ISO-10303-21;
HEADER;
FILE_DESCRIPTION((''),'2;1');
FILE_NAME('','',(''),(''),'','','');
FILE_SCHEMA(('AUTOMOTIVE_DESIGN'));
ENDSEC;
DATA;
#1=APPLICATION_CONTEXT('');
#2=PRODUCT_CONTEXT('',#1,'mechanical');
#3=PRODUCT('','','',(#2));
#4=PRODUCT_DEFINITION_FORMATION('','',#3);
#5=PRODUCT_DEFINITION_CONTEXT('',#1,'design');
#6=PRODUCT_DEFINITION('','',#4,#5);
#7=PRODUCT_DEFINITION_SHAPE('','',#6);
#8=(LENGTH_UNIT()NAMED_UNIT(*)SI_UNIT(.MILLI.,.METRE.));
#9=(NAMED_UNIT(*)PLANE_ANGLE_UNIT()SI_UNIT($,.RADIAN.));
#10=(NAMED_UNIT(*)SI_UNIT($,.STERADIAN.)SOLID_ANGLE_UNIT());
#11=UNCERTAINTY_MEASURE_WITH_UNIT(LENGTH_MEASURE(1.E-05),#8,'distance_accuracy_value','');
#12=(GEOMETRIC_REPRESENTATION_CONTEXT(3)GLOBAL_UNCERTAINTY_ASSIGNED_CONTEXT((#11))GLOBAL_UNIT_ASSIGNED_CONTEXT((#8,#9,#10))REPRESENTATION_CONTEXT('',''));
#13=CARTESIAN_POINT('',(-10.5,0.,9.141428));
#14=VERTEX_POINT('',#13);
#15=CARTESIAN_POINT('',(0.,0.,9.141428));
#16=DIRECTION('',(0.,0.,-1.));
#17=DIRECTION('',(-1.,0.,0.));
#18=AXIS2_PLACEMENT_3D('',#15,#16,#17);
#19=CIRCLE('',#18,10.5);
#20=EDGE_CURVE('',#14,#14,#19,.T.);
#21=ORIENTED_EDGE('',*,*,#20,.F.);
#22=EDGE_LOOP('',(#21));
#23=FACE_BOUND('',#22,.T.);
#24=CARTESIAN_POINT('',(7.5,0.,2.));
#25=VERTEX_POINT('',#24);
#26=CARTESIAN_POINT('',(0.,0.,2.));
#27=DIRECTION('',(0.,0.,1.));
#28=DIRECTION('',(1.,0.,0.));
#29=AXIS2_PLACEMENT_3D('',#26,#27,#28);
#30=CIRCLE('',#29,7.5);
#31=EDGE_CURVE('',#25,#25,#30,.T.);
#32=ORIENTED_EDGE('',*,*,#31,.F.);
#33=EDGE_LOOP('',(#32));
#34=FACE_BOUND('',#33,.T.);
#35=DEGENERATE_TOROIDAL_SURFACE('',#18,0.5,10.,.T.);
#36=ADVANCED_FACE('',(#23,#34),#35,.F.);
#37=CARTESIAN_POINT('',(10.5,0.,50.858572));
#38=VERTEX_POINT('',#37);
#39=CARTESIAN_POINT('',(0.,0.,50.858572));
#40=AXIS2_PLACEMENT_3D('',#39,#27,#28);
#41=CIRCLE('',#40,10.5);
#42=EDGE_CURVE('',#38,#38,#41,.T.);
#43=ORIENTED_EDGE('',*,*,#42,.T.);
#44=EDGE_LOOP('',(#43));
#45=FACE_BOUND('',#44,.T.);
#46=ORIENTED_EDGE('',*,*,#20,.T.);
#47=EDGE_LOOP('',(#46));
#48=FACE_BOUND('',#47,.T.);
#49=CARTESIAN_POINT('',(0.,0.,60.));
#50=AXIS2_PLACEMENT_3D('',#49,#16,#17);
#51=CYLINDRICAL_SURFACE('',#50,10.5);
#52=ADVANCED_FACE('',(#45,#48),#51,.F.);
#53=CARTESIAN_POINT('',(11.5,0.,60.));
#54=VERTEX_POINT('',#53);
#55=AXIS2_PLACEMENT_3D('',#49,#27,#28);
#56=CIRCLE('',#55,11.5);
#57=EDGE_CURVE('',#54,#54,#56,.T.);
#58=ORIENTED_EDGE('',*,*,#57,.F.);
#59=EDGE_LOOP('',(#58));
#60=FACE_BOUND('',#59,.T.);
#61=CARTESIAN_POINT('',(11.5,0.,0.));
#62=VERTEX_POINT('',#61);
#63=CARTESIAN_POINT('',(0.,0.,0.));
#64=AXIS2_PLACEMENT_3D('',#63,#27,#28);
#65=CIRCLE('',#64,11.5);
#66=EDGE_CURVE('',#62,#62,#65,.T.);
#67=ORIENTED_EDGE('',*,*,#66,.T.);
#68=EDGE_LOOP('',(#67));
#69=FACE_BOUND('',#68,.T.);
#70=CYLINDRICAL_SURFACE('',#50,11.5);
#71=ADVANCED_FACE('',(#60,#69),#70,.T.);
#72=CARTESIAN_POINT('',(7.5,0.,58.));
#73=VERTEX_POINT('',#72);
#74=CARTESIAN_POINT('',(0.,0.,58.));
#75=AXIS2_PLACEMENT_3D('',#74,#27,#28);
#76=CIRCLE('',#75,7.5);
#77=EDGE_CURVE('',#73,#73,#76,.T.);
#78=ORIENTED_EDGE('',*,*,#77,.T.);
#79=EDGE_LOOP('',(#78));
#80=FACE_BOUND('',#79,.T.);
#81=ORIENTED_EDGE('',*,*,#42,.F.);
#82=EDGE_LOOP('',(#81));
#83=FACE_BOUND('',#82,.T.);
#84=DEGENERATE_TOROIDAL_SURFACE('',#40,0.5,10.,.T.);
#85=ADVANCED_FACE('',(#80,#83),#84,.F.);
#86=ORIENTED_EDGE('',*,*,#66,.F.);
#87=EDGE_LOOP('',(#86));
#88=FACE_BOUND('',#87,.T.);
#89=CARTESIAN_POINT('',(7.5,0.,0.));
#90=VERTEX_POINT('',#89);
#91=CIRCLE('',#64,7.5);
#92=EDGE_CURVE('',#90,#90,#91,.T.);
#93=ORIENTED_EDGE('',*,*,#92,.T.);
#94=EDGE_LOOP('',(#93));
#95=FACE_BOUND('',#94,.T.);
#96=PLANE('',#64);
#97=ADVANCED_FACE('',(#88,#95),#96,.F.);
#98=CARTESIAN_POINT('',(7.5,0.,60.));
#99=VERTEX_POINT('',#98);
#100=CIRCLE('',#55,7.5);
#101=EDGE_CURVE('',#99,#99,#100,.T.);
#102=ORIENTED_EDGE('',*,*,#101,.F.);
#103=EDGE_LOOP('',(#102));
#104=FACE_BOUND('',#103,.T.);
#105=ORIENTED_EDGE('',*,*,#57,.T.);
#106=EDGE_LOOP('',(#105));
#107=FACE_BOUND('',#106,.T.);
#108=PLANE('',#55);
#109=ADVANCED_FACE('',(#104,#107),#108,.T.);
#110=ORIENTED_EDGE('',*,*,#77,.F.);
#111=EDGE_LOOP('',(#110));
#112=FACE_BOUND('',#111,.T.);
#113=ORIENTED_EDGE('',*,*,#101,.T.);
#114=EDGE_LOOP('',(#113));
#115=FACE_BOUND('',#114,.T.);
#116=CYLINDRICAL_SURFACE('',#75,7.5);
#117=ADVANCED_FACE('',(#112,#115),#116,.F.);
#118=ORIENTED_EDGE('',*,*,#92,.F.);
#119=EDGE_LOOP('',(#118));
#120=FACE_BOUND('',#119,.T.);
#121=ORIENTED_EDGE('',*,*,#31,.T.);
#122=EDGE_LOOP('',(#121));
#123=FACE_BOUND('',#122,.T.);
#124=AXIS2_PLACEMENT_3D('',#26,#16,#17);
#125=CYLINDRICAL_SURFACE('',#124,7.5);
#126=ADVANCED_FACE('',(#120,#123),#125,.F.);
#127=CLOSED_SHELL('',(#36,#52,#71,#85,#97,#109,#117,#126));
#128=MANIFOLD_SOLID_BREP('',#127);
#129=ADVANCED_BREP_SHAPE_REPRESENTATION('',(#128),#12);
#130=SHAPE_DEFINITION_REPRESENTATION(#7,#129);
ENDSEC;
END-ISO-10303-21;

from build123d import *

# Parameters (mm, degrees)
SKETCH1_R           = 11.5
SKETCH1_R_2         = 10.5
BOSS_EXTRUDE1_DEPTH = 60
SKETCH1_3_R         = 10.5
SKETCH1_3_R_2       = 7.5
BOSS_EXTRUDE2_DEPTH = 2
FILLET2_R           = 10


with BuildPart() as part:
    # Sketch1 → Boss-Extrude1 (new body)
    with BuildSketch(Plane.XY):
        Circle(SKETCH1_R)
        Circle(SKETCH1_R_2, mode=Mode.SUBTRACT)
    extrude(amount=BOSS_EXTRUDE1_DEPTH)

    # Sketch1<3> → Boss-Extrude2 (add)
    with BuildSketch(Plane.XY):
        Circle(SKETCH1_3_R)
        Circle(SKETCH1_3_R_2, mode=Mode.SUBTRACT)
    boss_extrude2 = extrude(amount=BOSS_EXTRUDE2_DEPTH)

    # Mirror1: Boss-Extrude2 across plane
    add(boss_extrude2.mirror(Plane.XY.offset(30)))

    # Fillet2
    # the kernel refuses this fillet: 10 mm, written as the material it adds along each edge
    with BuildSketch(Plane(origin=(0, 0, 58), x_dir=(1, 0, 0), z_dir=(0, -1, 0))) as fillet2_piece_1:
        with BuildLine():
            CenterArc((0.5, -7.141428429), FILLET2_R, 0, 45.572995999)
            Line((7.5, 0), (7.64, 0.142828569))
            ThreePointArc((7.64, 0.142828569), (9, 0.2), (10.5, 0.2))
            Line((10.5, 0.2), (10.7, 0))
            Line((10.7, 0), (10.7, -7.141428429))
            Line((10.7, -7.141428429), (10.5, -7.141428429))
        make_face()
    revolve(axis=Axis((0, 0, 58), (0, 0, 1)))
    with BuildSketch(Plane(origin=(0, 0, 2), x_dir=(1, 0, 0), z_dir=(0, -1, 0))) as fillet2_piece_2:
        with BuildLine():
            CenterArc((0.5, 7.141428429), FILLET2_R, 314.427004001, 45.572995999)
            Line((10.5, 7.141428429), (10.7, 7.141428429))
            Line((10.7, 7.141428429), (10.7, 0))
            Line((10.7, 0), (10.5, -0.2))
            ThreePointArc((10.5, -0.2), (9, -0.2), (7.64, -0.142828569))
            Line((7.64, -0.142828569), (7.5, 0))
        make_face()
    revolve(axis=Axis((0, 0, 2), (0, 0, 1)))


solid = part.part
